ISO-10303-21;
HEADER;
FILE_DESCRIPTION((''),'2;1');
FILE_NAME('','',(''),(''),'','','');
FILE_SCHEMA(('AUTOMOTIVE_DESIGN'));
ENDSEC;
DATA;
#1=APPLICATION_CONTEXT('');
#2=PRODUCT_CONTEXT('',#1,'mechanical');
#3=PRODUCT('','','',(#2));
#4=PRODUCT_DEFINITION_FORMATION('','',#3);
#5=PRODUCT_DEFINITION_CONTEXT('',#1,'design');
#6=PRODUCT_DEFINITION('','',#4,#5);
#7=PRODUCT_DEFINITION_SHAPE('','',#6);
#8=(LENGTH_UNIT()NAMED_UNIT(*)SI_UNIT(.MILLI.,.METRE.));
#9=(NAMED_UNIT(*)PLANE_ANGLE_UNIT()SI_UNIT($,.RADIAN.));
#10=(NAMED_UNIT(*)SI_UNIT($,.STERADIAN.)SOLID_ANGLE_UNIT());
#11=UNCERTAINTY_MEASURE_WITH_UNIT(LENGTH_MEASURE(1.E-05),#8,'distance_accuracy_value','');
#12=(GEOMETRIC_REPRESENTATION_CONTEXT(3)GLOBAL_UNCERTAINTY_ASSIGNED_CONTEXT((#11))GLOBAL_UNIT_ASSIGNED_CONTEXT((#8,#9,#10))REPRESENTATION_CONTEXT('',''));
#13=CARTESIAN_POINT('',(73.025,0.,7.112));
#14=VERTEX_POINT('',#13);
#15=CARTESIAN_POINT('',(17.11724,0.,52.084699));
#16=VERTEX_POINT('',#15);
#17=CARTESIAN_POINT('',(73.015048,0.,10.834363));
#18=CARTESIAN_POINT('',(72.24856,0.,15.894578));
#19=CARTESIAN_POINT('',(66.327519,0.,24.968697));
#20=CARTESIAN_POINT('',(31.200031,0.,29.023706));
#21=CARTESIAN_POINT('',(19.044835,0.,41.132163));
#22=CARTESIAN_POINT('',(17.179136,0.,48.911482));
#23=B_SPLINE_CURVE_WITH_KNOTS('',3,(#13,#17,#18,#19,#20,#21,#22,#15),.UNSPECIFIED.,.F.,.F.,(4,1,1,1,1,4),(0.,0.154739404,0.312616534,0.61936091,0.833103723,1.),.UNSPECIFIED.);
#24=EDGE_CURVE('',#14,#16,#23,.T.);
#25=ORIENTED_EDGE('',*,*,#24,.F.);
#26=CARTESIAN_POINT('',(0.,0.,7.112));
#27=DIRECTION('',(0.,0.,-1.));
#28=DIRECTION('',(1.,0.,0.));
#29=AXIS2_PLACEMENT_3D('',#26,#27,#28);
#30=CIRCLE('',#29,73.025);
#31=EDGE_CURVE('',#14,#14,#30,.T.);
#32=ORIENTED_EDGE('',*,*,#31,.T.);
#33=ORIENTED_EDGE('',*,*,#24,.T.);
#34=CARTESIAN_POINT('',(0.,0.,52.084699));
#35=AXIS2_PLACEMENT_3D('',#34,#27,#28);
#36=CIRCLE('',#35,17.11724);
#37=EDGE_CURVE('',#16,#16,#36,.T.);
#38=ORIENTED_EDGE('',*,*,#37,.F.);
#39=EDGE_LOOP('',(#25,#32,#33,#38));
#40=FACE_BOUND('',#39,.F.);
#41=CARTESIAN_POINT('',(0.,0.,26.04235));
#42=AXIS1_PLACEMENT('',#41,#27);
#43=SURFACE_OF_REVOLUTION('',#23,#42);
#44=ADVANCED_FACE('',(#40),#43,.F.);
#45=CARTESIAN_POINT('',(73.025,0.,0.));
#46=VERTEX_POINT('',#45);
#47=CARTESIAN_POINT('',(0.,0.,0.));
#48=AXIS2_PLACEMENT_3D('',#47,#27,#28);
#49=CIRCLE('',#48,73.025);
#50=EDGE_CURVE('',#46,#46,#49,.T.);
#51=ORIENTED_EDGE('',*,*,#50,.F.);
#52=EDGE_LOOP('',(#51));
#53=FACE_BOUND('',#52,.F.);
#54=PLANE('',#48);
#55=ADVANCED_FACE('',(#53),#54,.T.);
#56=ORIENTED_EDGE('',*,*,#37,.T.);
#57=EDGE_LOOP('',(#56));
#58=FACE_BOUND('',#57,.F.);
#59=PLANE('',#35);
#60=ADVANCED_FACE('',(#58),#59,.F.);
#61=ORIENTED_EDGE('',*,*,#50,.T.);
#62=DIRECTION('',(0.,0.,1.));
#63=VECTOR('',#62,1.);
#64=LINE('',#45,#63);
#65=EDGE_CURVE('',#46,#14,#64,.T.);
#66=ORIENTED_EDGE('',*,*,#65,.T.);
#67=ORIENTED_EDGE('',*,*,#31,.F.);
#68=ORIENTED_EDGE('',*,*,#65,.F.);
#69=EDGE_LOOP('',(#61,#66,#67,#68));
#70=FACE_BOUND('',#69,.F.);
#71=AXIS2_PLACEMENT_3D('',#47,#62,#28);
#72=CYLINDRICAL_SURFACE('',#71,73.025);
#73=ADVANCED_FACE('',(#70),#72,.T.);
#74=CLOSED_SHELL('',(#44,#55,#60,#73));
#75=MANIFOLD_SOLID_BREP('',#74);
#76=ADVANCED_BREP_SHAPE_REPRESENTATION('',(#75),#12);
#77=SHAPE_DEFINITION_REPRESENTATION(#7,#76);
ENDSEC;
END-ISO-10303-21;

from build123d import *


# Not quite as in the source:
# - the program builds the solid bodies; features that only make, move or delete a surface that nothing else refers to are left out


with BuildPart() as f3:
    # F2 (on Front) → F3 (revolve)
    with BuildSketch(Plane.XZ):
        with BuildLine():
            Line((0, 0), (73.025, 0))
            Line((73.025, 0), (73.025, 7.112))
            add(Edge.make_bspline(
                [(73.025, 7.112), (73.015047562, 10.8343630777), (72.2485598093, 15.8945775164), (66.3275190936, 24.9686965772), (31.2000310376, 29.0237063536), (19.0448345768, 41.1321634463), (17.1791362136, 48.9114817586), (17.1172395349, 52.0846992731)],
                knots=[0, 0, 0, 0, 0.1547394037, 0.3126165344, 0.6193609099, 0.8331037231, 1, 1, 1, 1], degree=3))
            Line((17.1172395349, 52.0846992731), (0, 52.0846992731))
            Line((0, 52.0846992731), (0, 0))
        make_face()
    revolve(axis=Axis((0, 0, 26.0423496366), (0, 0, -1)))


solid = f3.part
